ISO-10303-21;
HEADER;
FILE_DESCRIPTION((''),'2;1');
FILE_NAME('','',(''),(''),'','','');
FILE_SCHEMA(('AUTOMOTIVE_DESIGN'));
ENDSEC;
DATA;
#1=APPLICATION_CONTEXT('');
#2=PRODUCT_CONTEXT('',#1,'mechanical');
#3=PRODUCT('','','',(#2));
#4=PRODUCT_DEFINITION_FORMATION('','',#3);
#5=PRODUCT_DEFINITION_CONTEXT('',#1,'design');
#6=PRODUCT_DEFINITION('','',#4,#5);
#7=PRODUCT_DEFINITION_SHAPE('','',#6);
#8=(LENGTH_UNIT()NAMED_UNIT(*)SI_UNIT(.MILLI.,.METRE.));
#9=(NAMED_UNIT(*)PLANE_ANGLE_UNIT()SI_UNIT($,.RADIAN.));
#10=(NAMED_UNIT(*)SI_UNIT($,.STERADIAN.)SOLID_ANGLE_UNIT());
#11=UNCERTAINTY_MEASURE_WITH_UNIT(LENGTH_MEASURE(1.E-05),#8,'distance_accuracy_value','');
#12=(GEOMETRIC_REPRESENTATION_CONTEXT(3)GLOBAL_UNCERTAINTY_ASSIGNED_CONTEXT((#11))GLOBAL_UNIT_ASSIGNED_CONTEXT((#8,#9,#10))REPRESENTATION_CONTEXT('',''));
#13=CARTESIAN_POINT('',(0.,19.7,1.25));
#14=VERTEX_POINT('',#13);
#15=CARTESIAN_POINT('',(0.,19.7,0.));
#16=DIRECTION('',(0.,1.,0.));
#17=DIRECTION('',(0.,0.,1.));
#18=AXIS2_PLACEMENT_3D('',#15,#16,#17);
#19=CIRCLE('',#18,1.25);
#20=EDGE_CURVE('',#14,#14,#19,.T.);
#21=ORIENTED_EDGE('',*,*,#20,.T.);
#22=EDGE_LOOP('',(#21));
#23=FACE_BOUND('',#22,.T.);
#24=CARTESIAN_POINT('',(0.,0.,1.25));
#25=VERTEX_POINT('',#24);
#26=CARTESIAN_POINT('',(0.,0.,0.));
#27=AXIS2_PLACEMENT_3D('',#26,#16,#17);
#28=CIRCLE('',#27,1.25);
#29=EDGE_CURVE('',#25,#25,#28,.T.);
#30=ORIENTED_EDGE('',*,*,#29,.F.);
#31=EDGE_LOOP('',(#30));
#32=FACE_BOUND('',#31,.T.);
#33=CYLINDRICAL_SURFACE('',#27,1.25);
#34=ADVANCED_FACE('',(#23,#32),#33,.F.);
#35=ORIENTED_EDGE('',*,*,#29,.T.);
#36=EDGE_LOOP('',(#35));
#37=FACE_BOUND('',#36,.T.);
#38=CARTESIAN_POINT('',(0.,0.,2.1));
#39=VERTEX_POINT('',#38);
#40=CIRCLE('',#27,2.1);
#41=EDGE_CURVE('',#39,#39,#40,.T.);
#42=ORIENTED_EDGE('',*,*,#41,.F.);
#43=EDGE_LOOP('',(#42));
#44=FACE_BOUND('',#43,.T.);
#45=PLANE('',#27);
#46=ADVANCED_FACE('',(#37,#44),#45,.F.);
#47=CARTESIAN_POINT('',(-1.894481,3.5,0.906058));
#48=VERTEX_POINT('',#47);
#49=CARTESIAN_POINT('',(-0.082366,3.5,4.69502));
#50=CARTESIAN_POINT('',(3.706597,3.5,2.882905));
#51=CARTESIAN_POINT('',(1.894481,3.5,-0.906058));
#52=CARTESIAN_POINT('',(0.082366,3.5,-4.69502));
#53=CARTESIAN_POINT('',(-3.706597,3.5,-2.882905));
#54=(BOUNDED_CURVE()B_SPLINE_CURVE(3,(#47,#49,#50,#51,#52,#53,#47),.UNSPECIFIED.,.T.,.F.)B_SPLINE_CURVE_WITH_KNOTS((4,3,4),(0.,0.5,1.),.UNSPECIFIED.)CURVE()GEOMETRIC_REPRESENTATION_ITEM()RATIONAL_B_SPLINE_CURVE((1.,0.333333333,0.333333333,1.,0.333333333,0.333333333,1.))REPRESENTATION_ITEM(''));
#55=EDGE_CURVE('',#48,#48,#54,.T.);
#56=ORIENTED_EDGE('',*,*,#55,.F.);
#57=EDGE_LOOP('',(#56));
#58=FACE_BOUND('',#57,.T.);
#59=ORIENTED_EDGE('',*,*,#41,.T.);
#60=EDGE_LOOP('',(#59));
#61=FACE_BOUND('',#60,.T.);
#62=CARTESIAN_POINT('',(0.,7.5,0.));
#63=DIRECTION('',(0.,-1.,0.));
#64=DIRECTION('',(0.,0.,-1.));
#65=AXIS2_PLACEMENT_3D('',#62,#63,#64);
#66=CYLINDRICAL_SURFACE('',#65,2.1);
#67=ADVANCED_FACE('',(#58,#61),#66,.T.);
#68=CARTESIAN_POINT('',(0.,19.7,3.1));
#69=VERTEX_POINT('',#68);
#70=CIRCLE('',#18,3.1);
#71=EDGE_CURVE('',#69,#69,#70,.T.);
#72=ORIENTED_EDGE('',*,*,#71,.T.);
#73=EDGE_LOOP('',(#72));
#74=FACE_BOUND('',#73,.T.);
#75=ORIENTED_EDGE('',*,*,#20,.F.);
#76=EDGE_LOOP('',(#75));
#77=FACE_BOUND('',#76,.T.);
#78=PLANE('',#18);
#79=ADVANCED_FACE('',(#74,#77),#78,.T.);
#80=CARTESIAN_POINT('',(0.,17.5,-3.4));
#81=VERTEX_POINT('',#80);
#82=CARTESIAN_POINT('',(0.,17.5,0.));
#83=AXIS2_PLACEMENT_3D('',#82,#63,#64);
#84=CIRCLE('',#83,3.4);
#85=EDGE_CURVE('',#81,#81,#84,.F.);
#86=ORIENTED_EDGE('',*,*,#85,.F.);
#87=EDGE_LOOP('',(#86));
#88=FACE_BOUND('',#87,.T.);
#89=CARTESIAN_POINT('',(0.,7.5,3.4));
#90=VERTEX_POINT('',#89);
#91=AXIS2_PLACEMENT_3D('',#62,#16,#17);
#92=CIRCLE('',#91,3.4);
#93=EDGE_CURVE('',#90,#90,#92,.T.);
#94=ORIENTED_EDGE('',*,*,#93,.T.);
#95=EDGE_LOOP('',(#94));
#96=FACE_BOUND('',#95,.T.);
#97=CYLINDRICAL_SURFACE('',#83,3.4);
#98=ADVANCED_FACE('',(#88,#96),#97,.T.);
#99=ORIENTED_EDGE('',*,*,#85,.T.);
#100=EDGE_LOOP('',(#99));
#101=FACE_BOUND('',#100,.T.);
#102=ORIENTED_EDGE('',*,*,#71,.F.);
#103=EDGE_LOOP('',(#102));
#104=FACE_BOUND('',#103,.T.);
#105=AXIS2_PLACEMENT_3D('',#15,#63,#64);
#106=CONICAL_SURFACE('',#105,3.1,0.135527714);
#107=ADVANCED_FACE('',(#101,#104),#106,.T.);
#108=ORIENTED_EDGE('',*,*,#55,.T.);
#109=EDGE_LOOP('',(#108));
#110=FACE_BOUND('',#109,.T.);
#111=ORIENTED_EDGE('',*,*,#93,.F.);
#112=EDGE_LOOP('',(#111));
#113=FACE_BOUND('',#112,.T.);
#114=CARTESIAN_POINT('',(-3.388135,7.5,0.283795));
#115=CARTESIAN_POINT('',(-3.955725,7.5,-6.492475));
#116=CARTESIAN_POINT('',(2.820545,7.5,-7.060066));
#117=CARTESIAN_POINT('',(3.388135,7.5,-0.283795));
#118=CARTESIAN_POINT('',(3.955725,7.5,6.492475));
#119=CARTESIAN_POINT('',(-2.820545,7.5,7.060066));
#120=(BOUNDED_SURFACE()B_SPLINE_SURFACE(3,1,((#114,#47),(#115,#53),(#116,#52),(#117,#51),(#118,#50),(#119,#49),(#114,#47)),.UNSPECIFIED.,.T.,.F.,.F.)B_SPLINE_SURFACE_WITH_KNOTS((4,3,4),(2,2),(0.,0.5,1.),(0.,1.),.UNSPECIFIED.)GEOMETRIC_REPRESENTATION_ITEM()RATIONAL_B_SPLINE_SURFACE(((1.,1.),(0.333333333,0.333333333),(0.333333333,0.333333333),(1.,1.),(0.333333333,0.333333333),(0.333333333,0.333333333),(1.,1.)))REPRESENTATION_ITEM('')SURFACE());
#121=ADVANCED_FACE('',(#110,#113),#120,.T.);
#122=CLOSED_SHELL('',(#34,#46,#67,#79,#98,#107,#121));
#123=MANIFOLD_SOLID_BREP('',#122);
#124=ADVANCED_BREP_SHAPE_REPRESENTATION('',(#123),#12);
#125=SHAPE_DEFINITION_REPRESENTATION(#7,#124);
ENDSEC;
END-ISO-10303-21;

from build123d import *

# Parameters (mm, degrees)
SKETCH_1_R          = 2.1
EXTRUDE_1_DEPTH     = 7.5
SKETCH_5_R          = 3.4
EXTRUDE_2_DEPTH     = 10
SKETCH_7_R          = 3.1
SKETCH_6_R          = 3.4
SKETCH_8_R          = 1.25
CUT_EXTRUDE_1_DEPTH = 21.27831367


with BuildPart() as part:
    # 草图1 → 凸台-拉伸1 (new body)
    with BuildSketch(Plane(origin=(0, 0, 0), x_dir=(1, 0, 0), z_dir=(0, 1, 0))):
        with Locations(Location((0, 0, 0), (0, 0, 270))):
            Circle(SKETCH_1_R)
    extrude(amount=EXTRUDE_1_DEPTH)

    # 放样1: read off the stored shape, not the designer's step
    # 放样1: loft between two sections, ruled curve by curve
    loft_1_from = [
        Edge.make_bspline([(-3.388135234, 7.5, 0.283795064), (-3.955725362, 7.5, -6.492475403), (2.820545105, 7.5, -7.060065531), (3.388135234, 7.5, -0.283795064), (3.955725362, 7.5, 6.492475403), (-2.820545105, 7.5, 7.060065531), (-3.388135234, 7.5, 0.283795064)], [0, 0, 0, 0, 0.5, 0.5, 0.5, 1, 1, 1, 1], 3, [1, 0.333333333, 0.333333333, 1, 0.333333333, 0.333333333, 1]),
    ]
    loft_1_to = [
        Edge.make_bspline([(-1.894481315, 3.5, 0.906057696), (-3.706596707, 3.5, -2.882904933), (0.082365923, 3.5, -4.695020325), (1.894481315, 3.5, -0.906057696), (3.706596707, 3.5, 2.882904933), (-0.082365923, 3.5, 4.695020325), (-1.894481315, 3.5, 0.906057696)], [0, 0, 0, 0, 0.5, 0.5, 0.5, 1, 1, 1, 1], 3, [1, 0.333333333, 0.333333333, 1, 0.333333333, 0.333333333, 1]),
    ]
    loft_1 = Solid(Shell([*[Face.make_surface_from_curves(loft_1_from[k], loft_1_to[k]) for k in range(1)], Face(Wire(loft_1_from)), Face(Wire(loft_1_to))]))
    add(loft_1)

    # 草图5 → 凸台-拉伸2 (add)
    with BuildSketch(Plane(origin=(0, 7.5, 0), x_dir=(1, 0, 0), z_dir=(0, 1, 0))):
        with Locations(Location((0, 0, 0), (0, 0, 270))):
            Circle(SKETCH_5_R)
    extrude(amount=EXTRUDE_2_DEPTH)

    # 草图7 → 放样2 section 0
    with BuildSketch(Plane(origin=(0, 19.7, 0), x_dir=(1, 0, 0), z_dir=(0, 1, 0))):
        Circle(SKETCH_7_R)
    # 草图6 → 放样2 section 1
    with BuildSketch(Plane(origin=(0, 17.5, 0), x_dir=(1, 0, 0), z_dir=(0, 1, 0))):
        Circle(SKETCH_6_R)
    loft()

    # 草图8 → 切除-拉伸1 (cut, through all)
    with BuildSketch(Plane(origin=(0, 19.7, 0), x_dir=(1, 0, 0), z_dir=(0, 1, 0))):
        with Locations(Location((0, 0, 0), (0, 0, 270))):
            Circle(SKETCH_8_R)
    extrude(amount=-CUT_EXTRUDE_1_DEPTH, mode=Mode.SUBTRACT)


solid = part.part
